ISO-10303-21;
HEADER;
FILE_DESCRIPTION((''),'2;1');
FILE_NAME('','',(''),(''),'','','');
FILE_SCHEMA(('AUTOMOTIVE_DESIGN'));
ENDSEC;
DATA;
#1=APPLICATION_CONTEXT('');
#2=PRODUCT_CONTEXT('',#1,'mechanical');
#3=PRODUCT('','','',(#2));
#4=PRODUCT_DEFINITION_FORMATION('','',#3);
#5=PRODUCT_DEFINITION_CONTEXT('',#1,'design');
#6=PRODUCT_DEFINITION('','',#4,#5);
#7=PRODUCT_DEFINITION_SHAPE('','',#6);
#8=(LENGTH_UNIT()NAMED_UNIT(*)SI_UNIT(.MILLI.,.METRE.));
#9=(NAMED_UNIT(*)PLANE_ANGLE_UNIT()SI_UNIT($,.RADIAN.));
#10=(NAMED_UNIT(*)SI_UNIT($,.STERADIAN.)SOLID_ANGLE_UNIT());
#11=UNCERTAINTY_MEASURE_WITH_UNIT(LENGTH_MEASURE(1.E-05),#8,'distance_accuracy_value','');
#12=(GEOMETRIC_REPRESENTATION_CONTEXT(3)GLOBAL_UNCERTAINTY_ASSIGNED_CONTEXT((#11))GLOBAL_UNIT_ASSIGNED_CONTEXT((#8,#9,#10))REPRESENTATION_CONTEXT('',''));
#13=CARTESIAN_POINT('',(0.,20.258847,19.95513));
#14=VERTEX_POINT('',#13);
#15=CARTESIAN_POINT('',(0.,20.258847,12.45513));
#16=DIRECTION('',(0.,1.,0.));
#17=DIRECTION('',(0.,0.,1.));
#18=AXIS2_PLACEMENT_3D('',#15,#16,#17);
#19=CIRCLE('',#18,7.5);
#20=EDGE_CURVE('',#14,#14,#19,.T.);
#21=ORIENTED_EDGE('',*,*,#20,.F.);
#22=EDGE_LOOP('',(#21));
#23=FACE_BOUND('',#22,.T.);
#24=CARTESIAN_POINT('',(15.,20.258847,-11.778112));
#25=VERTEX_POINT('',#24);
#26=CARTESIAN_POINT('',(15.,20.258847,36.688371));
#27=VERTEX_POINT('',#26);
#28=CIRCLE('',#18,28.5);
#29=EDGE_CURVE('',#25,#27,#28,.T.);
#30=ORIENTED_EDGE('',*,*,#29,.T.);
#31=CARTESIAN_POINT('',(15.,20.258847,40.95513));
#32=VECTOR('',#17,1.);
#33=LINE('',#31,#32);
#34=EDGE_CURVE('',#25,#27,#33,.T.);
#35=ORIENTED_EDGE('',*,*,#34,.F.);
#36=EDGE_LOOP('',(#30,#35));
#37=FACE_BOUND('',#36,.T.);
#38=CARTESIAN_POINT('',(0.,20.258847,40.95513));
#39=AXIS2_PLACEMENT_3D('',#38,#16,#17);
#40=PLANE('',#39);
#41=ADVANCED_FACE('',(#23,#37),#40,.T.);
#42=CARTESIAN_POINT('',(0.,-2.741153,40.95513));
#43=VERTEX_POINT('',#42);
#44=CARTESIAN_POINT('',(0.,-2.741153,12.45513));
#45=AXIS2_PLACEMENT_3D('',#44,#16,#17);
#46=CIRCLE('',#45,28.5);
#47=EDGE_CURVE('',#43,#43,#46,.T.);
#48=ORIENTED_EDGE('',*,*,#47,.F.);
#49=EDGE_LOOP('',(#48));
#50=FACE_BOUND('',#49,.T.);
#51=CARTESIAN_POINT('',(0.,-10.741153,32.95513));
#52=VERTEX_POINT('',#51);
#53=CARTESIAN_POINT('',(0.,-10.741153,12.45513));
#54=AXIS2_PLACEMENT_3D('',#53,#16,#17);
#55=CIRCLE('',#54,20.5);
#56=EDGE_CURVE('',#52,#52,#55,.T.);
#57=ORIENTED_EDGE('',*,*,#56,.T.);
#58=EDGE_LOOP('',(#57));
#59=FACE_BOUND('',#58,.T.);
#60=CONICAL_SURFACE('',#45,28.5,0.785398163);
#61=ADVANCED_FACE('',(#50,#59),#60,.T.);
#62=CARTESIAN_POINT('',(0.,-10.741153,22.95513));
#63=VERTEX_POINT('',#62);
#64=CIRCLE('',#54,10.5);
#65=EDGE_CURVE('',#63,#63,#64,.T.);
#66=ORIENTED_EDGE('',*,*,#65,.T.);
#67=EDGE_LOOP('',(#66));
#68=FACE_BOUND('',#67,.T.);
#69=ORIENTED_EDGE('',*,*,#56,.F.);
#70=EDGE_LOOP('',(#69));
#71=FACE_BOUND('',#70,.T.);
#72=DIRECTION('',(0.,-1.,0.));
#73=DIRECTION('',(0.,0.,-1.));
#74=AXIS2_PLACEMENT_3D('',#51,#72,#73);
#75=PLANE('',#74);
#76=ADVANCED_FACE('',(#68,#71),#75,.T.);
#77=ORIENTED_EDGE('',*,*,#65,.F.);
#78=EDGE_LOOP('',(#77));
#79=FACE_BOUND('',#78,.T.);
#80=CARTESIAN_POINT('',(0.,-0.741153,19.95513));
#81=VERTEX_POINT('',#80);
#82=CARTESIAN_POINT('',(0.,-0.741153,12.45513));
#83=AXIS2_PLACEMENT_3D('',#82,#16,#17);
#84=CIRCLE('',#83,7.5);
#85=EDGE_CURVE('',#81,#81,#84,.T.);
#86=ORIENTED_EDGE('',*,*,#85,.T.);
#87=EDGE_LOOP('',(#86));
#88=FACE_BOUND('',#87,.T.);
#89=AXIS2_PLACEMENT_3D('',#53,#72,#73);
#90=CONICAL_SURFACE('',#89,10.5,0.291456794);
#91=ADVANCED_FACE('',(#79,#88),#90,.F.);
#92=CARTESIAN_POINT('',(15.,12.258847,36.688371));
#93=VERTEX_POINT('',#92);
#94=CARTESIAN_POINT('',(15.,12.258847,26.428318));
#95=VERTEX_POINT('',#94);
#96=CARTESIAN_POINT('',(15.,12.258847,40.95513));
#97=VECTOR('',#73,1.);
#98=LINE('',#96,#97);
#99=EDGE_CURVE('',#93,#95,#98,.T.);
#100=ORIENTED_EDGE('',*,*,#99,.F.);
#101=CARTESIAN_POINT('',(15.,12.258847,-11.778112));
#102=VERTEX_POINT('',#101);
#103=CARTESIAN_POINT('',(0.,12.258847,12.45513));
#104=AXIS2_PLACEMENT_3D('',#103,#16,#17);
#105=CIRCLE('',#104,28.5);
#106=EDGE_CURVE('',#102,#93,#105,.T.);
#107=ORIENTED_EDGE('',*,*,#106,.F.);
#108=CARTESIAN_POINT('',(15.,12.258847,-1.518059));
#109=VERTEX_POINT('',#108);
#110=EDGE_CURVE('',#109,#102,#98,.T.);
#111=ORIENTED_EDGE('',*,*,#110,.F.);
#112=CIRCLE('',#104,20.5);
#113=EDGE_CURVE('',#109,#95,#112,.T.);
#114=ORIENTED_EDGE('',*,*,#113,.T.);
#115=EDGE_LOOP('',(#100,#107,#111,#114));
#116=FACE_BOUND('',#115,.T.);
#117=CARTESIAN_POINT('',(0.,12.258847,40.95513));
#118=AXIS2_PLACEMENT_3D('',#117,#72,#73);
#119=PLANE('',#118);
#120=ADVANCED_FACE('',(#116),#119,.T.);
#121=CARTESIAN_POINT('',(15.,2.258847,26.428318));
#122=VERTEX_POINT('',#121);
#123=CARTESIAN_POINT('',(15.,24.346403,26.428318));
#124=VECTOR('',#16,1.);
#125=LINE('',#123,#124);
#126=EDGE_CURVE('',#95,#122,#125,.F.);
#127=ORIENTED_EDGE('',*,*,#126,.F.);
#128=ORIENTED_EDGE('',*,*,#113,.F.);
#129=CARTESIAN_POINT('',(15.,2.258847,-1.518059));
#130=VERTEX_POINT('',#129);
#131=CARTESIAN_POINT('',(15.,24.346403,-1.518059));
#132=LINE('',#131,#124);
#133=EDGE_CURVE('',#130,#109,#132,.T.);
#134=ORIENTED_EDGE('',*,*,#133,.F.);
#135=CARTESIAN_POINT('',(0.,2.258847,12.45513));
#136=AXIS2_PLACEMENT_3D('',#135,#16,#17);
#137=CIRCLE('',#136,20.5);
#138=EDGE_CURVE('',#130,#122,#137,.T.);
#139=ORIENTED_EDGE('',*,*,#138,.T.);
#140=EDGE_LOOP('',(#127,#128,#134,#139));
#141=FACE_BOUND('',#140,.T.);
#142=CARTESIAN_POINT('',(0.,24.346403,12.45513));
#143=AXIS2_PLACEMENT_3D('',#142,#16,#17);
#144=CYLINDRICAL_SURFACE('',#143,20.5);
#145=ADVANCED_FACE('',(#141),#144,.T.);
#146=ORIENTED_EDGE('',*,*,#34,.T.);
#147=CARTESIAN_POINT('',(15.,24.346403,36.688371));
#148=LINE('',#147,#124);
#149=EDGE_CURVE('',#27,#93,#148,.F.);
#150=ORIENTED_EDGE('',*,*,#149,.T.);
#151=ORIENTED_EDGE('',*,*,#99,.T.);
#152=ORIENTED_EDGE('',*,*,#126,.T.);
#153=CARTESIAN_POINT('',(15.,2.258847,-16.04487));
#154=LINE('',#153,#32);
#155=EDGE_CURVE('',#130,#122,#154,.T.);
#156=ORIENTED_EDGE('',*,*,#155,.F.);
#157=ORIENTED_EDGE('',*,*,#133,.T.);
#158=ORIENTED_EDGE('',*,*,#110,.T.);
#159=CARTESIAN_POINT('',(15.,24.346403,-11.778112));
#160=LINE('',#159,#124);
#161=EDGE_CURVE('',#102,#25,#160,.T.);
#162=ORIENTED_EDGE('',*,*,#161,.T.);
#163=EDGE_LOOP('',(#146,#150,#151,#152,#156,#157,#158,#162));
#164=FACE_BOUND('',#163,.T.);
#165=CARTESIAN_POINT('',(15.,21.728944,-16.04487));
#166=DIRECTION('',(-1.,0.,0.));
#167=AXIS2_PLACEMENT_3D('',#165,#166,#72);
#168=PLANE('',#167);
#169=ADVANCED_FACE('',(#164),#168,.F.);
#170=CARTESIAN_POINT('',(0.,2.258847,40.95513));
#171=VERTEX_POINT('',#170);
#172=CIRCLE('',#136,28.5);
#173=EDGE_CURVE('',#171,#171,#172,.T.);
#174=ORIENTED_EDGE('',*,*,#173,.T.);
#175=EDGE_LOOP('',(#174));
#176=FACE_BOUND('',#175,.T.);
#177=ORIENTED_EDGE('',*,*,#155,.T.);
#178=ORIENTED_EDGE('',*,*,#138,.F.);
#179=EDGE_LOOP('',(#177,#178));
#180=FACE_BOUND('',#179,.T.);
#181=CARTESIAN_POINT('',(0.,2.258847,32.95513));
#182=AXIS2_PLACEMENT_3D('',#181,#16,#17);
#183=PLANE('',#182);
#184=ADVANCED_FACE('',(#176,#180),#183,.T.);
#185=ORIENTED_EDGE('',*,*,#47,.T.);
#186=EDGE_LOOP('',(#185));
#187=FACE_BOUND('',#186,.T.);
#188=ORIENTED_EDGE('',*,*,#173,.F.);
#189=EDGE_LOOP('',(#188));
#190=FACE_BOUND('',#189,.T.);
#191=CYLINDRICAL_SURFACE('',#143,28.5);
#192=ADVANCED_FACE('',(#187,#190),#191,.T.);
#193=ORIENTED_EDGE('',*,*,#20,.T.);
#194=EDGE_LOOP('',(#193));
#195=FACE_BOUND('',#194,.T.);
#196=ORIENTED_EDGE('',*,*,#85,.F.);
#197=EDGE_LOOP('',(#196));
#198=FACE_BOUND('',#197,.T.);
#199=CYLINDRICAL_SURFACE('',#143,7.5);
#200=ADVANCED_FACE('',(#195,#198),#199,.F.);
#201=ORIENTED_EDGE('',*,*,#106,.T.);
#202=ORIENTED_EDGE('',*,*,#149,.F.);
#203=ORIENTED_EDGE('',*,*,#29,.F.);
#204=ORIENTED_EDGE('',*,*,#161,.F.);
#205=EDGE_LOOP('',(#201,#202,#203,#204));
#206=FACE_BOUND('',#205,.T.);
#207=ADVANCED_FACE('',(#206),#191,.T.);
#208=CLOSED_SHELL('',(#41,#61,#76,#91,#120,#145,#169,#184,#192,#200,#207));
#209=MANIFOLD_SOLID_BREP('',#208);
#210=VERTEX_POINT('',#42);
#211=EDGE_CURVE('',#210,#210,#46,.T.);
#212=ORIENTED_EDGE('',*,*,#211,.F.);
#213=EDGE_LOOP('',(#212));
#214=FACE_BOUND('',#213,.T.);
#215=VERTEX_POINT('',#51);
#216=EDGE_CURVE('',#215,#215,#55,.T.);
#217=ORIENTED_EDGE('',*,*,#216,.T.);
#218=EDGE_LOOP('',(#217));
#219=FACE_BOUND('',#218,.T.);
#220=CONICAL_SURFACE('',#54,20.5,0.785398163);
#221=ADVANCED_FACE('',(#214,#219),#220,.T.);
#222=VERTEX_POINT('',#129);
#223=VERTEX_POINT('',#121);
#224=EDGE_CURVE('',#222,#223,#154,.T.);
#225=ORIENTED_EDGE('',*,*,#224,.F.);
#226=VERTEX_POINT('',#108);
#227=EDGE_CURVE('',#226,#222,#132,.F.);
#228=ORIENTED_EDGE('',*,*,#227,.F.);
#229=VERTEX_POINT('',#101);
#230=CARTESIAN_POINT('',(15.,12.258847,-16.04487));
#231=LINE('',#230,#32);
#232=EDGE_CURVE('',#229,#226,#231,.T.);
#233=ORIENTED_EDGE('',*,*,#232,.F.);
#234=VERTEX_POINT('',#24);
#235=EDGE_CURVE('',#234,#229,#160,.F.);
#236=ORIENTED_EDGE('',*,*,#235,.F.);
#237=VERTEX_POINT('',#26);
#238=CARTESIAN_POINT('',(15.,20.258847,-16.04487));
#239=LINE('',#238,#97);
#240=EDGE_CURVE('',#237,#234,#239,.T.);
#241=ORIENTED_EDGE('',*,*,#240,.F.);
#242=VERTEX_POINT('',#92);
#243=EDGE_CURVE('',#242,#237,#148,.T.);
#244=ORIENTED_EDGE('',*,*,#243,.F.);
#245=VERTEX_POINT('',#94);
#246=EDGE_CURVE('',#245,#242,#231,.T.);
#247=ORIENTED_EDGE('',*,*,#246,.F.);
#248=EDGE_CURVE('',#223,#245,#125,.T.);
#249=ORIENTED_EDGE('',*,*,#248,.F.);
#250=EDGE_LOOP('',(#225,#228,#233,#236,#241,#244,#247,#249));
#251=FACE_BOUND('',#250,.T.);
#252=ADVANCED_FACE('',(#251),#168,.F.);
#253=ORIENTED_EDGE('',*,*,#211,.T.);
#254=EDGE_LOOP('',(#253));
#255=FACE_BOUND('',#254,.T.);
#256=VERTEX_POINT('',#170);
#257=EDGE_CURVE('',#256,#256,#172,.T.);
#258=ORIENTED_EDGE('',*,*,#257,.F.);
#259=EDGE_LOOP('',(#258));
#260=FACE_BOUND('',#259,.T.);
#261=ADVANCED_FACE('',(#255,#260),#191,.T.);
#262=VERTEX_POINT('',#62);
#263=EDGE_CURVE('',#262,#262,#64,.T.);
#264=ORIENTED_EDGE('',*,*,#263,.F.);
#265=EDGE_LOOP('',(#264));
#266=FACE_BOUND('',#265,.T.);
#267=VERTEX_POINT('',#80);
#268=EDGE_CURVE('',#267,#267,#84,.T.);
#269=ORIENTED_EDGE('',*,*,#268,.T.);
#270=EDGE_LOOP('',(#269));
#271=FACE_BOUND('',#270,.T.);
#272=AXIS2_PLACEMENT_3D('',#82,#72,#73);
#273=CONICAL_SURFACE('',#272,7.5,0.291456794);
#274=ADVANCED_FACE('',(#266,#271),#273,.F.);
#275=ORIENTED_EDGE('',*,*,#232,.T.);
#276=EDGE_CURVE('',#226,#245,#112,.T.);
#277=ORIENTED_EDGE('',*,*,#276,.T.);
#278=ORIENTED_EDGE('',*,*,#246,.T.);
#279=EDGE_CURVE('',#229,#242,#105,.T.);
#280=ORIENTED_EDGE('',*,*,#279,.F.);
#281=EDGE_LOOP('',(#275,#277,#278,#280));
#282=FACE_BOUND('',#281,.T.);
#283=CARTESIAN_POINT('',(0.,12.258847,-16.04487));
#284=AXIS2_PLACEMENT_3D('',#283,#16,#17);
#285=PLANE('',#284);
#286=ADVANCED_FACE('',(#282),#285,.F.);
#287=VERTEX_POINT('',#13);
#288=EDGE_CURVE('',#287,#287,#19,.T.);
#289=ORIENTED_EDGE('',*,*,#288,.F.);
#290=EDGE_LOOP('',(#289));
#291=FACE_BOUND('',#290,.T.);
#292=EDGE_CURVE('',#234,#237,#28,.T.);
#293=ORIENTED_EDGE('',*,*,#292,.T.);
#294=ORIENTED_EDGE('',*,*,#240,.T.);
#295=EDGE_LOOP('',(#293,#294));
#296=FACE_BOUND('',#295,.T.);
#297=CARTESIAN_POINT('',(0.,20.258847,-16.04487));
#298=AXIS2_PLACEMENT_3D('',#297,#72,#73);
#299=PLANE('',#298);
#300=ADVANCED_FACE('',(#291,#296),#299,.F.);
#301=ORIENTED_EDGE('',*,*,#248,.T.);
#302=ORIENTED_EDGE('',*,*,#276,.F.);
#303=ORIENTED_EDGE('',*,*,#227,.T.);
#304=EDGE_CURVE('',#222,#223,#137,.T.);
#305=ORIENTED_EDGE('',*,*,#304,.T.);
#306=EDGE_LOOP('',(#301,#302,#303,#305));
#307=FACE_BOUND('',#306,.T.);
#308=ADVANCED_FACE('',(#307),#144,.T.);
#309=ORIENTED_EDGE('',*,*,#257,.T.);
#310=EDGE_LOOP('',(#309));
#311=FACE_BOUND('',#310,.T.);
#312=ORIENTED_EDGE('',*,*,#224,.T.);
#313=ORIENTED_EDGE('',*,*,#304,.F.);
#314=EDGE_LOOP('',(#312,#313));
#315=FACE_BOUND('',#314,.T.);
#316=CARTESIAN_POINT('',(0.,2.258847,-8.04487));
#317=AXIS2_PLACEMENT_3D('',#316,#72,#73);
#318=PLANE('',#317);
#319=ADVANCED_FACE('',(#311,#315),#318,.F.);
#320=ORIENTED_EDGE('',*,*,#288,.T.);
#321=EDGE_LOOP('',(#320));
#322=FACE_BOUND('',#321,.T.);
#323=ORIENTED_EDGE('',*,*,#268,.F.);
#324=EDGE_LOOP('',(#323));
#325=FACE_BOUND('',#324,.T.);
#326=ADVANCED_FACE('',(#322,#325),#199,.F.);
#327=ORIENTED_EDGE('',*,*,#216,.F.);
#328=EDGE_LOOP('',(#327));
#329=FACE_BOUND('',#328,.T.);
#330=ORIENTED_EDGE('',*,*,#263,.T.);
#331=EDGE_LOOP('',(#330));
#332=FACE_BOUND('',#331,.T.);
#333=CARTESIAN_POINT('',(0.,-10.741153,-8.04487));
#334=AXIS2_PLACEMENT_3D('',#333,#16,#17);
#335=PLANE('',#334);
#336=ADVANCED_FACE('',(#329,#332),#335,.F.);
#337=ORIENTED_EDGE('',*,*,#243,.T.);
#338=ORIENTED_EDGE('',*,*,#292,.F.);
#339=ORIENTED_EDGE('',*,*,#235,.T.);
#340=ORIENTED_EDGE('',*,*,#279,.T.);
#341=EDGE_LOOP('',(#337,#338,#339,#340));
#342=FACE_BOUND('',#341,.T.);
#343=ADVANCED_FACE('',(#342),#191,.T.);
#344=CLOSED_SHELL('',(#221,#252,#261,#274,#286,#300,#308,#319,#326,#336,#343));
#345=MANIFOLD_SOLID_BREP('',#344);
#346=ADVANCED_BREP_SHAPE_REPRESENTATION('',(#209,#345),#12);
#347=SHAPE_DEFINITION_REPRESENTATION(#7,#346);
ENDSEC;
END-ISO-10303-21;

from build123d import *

# Parameters (mm, degrees)
ENL_V_MAT_EXTRU_2_DEPTH      = 54.851587997
ENL_V_MAT_EXTRU_2_DEPTH_BACK = 54.851587997
ESQUISSE4_W                  = 13.5
ESQUISSE4_H                  = 19.470096416


# Read off the part's stored shape, not the designer's step: Révolution1
with BuildPart() as part:
    # Révolution1 outline → Révolution1 (revolve)
    with BuildSketch(Plane.XY.offset(12.455129614)):
        Polygon((7.5, 20.258847156), (7.5, -0.741152844), (10.5, -10.741152844), (20.5, -10.741152844), (28.5, -2.741152844), (28.5, 2.258847156), (20.5, 2.258847156), (20.5, 12.258847156), (28.5, 12.258847156), (28.5, 20.258847156), align=None)
    revolve(axis=Axis((0, 0, 12.455129614), (0, 1, 0)))


with BuildPart() as body_2:
    # R_volution1 2 outline → R_volution1 2 (revolve)
    with BuildSketch(Plane.XY.offset(12.455129614)):
        Polygon((20.5, 12.258847156), (28.5, 12.258847156), (28.5, 20.258847156), (7.5, 20.258847156), (7.5, -0.741152844), (10.5, -10.741152844), (20.5, -10.741152844), (28.5, -2.741152844), (28.5, 2.258847156), (20.5, 2.258847156), align=None)
    revolve(axis=Axis((0, 0, 12.455129614), (0, 1, 0)))


with BuildPart() as enl_v_mat_extru_2_tool:
    # Esquisse4 → Enlèv. mat.-Extru.2 (new, two sides: drawn at the far end of the back side and taken through both)
    with BuildSketch(Plane.XY.offset(-ENL_V_MAT_EXTRU_2_DEPTH_BACK)):
        with Locations((21.75, 11.993895364)):
            Rectangle(ESQUISSE4_W, ESQUISSE4_H)
    extrude(amount=ENL_V_MAT_EXTRU_2_DEPTH + ENL_V_MAT_EXTRU_2_DEPTH_BACK)


with BuildPart() as part_1:
    add(part.part)

    # Enlèv. mat.-Extru.2: cut by enl_v_mat_extru_2_tool
    add(enl_v_mat_extru_2_tool.part, mode=Mode.SUBTRACT)


with BuildPart() as body_2_1:
    add(body_2.part)

    # Enlèv. mat.-Extru.2: cut by enl_v_mat_extru_2_tool
    add(enl_v_mat_extru_2_tool.part, mode=Mode.SUBTRACT)


solid = Compound([part_1.part, body_2_1.part])
